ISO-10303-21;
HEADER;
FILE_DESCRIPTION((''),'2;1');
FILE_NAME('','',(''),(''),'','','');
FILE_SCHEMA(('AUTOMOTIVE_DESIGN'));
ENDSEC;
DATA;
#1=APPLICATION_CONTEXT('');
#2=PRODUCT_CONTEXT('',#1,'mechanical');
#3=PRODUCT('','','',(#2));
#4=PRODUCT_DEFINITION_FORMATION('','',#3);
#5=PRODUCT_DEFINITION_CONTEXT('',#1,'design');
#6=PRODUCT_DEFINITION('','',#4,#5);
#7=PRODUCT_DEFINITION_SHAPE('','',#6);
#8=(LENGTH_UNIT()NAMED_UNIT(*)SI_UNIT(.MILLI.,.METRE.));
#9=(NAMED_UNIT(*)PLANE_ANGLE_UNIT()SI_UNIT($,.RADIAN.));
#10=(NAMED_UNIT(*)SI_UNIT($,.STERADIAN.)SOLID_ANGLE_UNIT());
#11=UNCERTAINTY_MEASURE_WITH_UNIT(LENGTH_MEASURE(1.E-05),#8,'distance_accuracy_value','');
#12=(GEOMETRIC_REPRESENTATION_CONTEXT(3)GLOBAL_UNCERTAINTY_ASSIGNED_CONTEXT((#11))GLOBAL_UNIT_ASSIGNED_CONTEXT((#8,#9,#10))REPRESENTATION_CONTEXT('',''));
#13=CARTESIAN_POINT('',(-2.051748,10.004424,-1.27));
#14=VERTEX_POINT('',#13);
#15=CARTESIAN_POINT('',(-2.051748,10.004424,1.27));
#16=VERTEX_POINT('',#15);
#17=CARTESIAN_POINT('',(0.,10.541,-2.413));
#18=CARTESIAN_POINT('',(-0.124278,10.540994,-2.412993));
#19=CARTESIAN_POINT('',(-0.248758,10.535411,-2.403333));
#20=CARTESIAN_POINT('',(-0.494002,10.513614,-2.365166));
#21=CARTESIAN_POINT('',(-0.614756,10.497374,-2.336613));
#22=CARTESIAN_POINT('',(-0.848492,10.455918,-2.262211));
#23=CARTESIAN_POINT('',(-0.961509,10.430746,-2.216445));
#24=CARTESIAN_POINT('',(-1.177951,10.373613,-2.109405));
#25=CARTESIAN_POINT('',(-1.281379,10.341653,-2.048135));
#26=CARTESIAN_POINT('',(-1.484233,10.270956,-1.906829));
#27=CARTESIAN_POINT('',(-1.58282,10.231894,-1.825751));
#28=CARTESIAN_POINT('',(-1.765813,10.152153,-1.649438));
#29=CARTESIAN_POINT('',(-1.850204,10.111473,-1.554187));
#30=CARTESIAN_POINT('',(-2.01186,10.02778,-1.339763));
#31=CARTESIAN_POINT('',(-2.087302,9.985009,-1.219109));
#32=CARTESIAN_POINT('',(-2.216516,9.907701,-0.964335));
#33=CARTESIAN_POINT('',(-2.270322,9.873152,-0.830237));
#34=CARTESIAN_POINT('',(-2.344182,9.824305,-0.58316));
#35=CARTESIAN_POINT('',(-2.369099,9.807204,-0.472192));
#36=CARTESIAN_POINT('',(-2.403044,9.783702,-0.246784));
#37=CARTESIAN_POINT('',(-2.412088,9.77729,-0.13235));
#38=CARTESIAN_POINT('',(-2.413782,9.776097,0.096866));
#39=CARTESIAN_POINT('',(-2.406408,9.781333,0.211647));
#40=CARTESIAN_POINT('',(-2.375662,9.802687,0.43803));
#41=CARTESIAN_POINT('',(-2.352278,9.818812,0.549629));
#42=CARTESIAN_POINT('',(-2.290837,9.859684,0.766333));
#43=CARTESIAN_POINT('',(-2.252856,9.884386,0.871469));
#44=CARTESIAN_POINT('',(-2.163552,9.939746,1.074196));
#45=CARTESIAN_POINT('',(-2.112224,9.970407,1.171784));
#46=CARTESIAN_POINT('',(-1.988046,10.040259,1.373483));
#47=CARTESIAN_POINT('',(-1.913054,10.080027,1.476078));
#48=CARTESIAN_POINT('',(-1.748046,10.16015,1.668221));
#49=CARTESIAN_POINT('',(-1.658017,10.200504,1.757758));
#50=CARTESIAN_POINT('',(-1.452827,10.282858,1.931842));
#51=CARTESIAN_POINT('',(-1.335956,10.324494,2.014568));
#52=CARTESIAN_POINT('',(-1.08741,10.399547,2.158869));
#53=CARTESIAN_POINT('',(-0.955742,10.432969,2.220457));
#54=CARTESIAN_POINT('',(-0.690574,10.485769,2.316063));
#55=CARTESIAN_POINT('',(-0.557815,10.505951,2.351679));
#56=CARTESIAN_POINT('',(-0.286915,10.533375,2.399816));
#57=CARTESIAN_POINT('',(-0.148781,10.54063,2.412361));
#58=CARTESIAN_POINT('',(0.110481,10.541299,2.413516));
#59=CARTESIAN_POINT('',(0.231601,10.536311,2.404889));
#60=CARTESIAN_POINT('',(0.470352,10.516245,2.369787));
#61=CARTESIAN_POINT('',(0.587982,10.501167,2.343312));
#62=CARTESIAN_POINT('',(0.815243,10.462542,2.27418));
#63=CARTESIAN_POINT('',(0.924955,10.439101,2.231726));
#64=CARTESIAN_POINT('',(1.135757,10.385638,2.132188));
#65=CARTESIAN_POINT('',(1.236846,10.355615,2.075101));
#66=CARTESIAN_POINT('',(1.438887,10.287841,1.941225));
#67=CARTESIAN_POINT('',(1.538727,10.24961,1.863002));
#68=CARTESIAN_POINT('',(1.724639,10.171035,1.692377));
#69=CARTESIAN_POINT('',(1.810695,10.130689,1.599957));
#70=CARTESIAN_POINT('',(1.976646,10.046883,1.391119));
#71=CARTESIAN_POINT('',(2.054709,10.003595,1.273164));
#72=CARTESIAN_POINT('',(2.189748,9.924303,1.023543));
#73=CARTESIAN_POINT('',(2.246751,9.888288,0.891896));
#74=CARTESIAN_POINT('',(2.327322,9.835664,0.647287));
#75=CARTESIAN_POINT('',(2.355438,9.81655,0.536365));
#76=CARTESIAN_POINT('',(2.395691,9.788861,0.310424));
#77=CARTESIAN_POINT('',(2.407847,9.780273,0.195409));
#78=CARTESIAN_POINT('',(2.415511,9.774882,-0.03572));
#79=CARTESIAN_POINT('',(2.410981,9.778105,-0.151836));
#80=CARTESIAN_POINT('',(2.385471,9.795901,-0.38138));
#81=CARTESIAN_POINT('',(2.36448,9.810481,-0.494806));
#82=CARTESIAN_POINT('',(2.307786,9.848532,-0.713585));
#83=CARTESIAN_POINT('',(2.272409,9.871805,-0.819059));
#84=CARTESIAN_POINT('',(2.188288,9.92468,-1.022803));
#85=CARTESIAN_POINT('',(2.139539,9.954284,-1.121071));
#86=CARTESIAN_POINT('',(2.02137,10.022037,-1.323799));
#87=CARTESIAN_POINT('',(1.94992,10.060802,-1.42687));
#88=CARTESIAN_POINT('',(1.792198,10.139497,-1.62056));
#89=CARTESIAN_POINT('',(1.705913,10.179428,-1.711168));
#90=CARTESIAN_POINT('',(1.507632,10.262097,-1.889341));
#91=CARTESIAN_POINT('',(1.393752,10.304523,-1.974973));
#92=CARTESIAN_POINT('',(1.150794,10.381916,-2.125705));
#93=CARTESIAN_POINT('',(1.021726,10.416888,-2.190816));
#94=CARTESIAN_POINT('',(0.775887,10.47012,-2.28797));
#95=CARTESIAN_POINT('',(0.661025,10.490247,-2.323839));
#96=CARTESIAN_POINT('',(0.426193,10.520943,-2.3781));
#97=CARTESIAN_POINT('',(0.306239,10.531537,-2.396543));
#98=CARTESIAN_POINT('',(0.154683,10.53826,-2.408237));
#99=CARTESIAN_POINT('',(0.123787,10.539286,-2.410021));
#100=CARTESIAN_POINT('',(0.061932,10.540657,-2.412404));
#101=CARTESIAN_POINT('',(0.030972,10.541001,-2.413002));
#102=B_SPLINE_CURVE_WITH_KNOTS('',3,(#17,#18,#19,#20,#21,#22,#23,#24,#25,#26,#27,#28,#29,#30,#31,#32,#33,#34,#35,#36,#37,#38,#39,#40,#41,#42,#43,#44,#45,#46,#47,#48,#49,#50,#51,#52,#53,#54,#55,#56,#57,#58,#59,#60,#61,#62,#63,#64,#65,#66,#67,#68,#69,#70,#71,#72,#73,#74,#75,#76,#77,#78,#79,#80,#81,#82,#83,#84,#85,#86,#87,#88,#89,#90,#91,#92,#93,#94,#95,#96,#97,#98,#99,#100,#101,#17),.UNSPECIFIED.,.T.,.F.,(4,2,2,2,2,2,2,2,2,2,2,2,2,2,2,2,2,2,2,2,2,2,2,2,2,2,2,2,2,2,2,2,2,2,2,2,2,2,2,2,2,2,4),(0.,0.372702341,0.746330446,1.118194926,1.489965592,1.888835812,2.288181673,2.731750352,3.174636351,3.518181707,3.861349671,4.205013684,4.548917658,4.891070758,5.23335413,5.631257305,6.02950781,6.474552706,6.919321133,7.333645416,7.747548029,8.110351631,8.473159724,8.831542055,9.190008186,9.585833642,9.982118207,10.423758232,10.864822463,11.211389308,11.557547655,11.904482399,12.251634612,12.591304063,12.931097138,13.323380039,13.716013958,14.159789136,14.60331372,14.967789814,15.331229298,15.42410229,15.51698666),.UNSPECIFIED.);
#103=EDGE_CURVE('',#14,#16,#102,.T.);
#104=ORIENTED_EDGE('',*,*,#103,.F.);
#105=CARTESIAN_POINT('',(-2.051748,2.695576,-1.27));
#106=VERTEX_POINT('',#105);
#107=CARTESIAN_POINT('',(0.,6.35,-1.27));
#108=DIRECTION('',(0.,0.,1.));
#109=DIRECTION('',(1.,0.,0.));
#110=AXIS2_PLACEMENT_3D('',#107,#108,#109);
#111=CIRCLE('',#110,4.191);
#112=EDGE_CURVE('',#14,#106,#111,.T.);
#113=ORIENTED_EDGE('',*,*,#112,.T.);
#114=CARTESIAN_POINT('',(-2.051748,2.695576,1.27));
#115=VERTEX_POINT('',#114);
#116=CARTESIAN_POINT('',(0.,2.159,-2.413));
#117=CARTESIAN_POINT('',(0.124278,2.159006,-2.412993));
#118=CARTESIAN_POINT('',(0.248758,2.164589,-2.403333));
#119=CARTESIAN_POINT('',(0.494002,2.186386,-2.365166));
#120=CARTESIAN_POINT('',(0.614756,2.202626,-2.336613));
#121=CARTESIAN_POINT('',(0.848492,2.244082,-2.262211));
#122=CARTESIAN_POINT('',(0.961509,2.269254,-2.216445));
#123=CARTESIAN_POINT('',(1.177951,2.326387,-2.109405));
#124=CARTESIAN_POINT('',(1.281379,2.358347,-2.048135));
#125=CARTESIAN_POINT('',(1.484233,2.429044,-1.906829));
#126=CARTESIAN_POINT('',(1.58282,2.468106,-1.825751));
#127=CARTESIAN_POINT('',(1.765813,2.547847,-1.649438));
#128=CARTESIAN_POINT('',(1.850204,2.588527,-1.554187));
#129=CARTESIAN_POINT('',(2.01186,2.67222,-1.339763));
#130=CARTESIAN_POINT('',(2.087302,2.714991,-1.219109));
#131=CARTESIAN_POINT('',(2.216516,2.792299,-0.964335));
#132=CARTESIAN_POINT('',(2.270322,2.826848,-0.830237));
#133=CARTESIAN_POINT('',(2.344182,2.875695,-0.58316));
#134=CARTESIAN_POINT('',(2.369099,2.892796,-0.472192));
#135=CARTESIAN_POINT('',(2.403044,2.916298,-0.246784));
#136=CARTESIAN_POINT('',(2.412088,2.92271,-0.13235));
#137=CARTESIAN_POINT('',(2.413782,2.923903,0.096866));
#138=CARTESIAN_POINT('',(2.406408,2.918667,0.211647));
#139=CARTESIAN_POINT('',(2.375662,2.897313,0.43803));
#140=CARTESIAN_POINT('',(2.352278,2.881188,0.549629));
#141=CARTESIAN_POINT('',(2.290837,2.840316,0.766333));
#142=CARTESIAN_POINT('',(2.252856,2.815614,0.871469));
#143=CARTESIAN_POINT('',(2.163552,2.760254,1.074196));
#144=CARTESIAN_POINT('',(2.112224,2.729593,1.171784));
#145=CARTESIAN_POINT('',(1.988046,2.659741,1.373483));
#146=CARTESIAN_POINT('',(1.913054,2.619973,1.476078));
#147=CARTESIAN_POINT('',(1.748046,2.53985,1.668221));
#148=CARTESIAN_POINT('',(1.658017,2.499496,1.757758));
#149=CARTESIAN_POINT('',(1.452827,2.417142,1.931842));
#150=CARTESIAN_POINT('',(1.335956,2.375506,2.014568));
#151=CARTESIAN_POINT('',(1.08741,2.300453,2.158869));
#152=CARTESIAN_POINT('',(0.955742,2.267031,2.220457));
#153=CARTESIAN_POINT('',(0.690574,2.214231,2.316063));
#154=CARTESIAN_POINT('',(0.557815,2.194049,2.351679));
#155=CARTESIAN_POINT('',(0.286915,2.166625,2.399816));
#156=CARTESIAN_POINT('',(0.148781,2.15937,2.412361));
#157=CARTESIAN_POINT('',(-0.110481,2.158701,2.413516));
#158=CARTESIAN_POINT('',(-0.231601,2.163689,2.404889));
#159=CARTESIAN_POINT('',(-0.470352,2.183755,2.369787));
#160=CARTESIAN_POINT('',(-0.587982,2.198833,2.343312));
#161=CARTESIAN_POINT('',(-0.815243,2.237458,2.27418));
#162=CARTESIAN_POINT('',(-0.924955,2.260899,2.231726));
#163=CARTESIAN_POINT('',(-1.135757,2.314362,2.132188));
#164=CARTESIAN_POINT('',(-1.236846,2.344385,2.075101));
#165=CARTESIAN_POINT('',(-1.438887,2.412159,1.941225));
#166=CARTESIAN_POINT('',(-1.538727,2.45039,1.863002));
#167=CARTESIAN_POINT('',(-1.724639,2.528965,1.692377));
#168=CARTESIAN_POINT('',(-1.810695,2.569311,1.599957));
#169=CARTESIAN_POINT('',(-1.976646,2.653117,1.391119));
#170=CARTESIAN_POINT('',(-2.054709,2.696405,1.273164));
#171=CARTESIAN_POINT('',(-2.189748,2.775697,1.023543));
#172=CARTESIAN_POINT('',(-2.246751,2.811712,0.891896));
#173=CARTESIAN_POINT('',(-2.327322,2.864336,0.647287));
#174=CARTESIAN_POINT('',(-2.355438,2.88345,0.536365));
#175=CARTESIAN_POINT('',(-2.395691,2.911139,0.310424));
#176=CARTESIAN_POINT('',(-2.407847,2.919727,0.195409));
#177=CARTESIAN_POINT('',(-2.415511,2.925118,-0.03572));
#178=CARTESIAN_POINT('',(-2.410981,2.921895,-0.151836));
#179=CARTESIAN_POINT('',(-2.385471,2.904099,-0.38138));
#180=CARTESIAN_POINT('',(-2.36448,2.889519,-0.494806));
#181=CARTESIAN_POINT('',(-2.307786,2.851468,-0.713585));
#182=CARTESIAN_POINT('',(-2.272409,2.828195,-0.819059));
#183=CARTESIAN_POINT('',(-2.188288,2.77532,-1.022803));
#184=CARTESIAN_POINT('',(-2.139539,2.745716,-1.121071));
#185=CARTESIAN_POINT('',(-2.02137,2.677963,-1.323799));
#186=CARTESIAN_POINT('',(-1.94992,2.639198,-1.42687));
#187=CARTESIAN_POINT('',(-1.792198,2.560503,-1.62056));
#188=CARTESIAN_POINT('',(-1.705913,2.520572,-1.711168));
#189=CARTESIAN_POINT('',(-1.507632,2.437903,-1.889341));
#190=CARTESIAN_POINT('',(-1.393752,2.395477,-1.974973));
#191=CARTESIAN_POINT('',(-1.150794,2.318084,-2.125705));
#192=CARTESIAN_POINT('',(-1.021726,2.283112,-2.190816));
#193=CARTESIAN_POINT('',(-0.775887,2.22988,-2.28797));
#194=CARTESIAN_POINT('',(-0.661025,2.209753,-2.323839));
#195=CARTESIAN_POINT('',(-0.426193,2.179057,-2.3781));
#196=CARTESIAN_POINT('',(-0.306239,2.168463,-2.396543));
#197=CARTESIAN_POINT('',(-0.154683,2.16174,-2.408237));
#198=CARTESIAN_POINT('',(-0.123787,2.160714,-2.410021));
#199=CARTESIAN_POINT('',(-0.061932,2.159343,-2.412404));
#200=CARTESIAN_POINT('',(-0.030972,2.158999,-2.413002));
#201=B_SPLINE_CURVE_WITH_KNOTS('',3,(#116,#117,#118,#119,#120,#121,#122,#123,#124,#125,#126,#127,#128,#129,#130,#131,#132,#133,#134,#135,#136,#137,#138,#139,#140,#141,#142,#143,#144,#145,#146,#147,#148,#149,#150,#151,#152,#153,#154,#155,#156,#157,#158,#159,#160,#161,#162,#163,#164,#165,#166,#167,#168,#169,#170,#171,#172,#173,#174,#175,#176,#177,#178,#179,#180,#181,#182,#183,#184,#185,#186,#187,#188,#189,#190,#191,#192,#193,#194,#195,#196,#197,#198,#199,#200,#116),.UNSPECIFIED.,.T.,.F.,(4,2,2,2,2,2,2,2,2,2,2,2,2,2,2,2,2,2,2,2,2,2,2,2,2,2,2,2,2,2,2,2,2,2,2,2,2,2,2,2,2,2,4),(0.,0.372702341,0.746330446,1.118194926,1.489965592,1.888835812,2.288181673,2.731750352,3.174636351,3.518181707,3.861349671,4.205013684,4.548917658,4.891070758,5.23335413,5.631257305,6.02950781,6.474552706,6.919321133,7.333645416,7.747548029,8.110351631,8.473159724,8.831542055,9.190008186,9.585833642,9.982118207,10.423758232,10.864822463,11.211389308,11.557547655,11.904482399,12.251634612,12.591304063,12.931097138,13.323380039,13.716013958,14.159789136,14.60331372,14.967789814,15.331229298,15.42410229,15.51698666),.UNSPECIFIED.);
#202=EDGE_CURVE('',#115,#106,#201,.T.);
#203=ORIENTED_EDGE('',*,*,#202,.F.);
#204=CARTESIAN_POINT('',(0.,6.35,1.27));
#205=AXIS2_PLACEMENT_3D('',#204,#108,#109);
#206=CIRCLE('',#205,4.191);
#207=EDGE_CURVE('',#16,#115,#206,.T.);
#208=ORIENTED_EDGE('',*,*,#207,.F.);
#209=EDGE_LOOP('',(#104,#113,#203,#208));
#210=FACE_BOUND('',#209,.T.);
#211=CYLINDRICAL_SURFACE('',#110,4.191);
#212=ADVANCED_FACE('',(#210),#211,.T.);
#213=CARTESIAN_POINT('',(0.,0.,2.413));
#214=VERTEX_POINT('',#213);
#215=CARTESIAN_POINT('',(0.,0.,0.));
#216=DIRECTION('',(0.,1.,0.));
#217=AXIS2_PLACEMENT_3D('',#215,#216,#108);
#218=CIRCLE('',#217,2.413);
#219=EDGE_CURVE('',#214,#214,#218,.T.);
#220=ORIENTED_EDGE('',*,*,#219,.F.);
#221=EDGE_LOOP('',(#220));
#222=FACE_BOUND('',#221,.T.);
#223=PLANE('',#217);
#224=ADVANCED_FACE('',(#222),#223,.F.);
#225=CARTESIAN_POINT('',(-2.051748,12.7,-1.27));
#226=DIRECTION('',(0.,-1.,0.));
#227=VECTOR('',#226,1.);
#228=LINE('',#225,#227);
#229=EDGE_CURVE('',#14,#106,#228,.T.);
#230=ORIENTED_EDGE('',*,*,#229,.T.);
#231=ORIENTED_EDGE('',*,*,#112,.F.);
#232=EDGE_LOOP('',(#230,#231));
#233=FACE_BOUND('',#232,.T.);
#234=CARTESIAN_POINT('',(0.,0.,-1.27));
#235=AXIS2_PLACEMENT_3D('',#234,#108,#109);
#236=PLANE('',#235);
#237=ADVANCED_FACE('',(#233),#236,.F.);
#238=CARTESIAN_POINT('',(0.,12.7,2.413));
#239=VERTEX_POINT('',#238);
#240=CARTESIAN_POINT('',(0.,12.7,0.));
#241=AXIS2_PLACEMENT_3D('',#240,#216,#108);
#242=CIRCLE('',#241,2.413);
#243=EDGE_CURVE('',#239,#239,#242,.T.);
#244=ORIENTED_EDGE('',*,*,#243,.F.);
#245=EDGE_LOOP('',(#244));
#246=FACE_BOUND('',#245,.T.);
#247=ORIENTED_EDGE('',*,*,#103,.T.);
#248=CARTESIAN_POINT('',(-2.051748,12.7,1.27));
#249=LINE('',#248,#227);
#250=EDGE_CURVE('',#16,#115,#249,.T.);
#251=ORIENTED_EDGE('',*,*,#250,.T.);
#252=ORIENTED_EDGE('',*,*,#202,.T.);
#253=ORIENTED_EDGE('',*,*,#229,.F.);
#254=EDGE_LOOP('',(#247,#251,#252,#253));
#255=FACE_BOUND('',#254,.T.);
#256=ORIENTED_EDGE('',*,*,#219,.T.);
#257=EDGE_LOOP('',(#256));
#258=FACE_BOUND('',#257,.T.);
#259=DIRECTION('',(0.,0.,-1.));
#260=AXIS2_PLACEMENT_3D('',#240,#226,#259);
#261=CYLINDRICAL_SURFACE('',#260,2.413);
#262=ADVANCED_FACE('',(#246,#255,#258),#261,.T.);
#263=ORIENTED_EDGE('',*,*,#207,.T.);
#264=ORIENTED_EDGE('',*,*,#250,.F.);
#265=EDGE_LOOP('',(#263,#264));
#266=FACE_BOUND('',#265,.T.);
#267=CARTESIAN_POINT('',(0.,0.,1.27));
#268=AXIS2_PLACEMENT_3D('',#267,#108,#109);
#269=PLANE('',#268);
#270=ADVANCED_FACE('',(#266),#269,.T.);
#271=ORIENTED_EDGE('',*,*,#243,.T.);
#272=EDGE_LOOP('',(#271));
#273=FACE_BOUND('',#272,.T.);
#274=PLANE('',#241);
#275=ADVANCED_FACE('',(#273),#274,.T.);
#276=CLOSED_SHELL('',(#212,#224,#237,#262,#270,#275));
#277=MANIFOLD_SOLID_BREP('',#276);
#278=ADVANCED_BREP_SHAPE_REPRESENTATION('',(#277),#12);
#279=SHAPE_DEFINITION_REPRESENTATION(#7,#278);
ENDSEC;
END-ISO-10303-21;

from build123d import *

# Parameters (mm, degrees)
SKETCH1_R                = 2.413
BOSS_EXTRUDE1_DEPTH      = 12.7
BOSS_EXTRUDE2_DEPTH      = 1.27
BOSS_EXTRUDE2_DEPTH_BACK = 1.27


with BuildPart() as part:
    # Sketch1 → Boss-Extrude1 (new body)
    with BuildSketch(Plane(origin=(0, 0, 0), x_dir=(1, 0, 0), z_dir=(0, 1, 0))):
        Circle(SKETCH1_R)
    extrude(amount=BOSS_EXTRUDE1_DEPTH)

    # Sketch2 → Boss-Extrude2 (add, two sides: drawn at the far end of the back side and taken through both)
    with BuildSketch(Plane.XY.offset(-BOSS_EXTRUDE2_DEPTH_BACK)):
        with BuildLine():
            ThreePointArc((0, 10.541), (-4.191, 6.35), (0, 2.159))
            Line((0, 2.159), (0, 10.541))
        make_face()
    extrude(amount=BOSS_EXTRUDE2_DEPTH + BOSS_EXTRUDE2_DEPTH_BACK)


solid = part.part
